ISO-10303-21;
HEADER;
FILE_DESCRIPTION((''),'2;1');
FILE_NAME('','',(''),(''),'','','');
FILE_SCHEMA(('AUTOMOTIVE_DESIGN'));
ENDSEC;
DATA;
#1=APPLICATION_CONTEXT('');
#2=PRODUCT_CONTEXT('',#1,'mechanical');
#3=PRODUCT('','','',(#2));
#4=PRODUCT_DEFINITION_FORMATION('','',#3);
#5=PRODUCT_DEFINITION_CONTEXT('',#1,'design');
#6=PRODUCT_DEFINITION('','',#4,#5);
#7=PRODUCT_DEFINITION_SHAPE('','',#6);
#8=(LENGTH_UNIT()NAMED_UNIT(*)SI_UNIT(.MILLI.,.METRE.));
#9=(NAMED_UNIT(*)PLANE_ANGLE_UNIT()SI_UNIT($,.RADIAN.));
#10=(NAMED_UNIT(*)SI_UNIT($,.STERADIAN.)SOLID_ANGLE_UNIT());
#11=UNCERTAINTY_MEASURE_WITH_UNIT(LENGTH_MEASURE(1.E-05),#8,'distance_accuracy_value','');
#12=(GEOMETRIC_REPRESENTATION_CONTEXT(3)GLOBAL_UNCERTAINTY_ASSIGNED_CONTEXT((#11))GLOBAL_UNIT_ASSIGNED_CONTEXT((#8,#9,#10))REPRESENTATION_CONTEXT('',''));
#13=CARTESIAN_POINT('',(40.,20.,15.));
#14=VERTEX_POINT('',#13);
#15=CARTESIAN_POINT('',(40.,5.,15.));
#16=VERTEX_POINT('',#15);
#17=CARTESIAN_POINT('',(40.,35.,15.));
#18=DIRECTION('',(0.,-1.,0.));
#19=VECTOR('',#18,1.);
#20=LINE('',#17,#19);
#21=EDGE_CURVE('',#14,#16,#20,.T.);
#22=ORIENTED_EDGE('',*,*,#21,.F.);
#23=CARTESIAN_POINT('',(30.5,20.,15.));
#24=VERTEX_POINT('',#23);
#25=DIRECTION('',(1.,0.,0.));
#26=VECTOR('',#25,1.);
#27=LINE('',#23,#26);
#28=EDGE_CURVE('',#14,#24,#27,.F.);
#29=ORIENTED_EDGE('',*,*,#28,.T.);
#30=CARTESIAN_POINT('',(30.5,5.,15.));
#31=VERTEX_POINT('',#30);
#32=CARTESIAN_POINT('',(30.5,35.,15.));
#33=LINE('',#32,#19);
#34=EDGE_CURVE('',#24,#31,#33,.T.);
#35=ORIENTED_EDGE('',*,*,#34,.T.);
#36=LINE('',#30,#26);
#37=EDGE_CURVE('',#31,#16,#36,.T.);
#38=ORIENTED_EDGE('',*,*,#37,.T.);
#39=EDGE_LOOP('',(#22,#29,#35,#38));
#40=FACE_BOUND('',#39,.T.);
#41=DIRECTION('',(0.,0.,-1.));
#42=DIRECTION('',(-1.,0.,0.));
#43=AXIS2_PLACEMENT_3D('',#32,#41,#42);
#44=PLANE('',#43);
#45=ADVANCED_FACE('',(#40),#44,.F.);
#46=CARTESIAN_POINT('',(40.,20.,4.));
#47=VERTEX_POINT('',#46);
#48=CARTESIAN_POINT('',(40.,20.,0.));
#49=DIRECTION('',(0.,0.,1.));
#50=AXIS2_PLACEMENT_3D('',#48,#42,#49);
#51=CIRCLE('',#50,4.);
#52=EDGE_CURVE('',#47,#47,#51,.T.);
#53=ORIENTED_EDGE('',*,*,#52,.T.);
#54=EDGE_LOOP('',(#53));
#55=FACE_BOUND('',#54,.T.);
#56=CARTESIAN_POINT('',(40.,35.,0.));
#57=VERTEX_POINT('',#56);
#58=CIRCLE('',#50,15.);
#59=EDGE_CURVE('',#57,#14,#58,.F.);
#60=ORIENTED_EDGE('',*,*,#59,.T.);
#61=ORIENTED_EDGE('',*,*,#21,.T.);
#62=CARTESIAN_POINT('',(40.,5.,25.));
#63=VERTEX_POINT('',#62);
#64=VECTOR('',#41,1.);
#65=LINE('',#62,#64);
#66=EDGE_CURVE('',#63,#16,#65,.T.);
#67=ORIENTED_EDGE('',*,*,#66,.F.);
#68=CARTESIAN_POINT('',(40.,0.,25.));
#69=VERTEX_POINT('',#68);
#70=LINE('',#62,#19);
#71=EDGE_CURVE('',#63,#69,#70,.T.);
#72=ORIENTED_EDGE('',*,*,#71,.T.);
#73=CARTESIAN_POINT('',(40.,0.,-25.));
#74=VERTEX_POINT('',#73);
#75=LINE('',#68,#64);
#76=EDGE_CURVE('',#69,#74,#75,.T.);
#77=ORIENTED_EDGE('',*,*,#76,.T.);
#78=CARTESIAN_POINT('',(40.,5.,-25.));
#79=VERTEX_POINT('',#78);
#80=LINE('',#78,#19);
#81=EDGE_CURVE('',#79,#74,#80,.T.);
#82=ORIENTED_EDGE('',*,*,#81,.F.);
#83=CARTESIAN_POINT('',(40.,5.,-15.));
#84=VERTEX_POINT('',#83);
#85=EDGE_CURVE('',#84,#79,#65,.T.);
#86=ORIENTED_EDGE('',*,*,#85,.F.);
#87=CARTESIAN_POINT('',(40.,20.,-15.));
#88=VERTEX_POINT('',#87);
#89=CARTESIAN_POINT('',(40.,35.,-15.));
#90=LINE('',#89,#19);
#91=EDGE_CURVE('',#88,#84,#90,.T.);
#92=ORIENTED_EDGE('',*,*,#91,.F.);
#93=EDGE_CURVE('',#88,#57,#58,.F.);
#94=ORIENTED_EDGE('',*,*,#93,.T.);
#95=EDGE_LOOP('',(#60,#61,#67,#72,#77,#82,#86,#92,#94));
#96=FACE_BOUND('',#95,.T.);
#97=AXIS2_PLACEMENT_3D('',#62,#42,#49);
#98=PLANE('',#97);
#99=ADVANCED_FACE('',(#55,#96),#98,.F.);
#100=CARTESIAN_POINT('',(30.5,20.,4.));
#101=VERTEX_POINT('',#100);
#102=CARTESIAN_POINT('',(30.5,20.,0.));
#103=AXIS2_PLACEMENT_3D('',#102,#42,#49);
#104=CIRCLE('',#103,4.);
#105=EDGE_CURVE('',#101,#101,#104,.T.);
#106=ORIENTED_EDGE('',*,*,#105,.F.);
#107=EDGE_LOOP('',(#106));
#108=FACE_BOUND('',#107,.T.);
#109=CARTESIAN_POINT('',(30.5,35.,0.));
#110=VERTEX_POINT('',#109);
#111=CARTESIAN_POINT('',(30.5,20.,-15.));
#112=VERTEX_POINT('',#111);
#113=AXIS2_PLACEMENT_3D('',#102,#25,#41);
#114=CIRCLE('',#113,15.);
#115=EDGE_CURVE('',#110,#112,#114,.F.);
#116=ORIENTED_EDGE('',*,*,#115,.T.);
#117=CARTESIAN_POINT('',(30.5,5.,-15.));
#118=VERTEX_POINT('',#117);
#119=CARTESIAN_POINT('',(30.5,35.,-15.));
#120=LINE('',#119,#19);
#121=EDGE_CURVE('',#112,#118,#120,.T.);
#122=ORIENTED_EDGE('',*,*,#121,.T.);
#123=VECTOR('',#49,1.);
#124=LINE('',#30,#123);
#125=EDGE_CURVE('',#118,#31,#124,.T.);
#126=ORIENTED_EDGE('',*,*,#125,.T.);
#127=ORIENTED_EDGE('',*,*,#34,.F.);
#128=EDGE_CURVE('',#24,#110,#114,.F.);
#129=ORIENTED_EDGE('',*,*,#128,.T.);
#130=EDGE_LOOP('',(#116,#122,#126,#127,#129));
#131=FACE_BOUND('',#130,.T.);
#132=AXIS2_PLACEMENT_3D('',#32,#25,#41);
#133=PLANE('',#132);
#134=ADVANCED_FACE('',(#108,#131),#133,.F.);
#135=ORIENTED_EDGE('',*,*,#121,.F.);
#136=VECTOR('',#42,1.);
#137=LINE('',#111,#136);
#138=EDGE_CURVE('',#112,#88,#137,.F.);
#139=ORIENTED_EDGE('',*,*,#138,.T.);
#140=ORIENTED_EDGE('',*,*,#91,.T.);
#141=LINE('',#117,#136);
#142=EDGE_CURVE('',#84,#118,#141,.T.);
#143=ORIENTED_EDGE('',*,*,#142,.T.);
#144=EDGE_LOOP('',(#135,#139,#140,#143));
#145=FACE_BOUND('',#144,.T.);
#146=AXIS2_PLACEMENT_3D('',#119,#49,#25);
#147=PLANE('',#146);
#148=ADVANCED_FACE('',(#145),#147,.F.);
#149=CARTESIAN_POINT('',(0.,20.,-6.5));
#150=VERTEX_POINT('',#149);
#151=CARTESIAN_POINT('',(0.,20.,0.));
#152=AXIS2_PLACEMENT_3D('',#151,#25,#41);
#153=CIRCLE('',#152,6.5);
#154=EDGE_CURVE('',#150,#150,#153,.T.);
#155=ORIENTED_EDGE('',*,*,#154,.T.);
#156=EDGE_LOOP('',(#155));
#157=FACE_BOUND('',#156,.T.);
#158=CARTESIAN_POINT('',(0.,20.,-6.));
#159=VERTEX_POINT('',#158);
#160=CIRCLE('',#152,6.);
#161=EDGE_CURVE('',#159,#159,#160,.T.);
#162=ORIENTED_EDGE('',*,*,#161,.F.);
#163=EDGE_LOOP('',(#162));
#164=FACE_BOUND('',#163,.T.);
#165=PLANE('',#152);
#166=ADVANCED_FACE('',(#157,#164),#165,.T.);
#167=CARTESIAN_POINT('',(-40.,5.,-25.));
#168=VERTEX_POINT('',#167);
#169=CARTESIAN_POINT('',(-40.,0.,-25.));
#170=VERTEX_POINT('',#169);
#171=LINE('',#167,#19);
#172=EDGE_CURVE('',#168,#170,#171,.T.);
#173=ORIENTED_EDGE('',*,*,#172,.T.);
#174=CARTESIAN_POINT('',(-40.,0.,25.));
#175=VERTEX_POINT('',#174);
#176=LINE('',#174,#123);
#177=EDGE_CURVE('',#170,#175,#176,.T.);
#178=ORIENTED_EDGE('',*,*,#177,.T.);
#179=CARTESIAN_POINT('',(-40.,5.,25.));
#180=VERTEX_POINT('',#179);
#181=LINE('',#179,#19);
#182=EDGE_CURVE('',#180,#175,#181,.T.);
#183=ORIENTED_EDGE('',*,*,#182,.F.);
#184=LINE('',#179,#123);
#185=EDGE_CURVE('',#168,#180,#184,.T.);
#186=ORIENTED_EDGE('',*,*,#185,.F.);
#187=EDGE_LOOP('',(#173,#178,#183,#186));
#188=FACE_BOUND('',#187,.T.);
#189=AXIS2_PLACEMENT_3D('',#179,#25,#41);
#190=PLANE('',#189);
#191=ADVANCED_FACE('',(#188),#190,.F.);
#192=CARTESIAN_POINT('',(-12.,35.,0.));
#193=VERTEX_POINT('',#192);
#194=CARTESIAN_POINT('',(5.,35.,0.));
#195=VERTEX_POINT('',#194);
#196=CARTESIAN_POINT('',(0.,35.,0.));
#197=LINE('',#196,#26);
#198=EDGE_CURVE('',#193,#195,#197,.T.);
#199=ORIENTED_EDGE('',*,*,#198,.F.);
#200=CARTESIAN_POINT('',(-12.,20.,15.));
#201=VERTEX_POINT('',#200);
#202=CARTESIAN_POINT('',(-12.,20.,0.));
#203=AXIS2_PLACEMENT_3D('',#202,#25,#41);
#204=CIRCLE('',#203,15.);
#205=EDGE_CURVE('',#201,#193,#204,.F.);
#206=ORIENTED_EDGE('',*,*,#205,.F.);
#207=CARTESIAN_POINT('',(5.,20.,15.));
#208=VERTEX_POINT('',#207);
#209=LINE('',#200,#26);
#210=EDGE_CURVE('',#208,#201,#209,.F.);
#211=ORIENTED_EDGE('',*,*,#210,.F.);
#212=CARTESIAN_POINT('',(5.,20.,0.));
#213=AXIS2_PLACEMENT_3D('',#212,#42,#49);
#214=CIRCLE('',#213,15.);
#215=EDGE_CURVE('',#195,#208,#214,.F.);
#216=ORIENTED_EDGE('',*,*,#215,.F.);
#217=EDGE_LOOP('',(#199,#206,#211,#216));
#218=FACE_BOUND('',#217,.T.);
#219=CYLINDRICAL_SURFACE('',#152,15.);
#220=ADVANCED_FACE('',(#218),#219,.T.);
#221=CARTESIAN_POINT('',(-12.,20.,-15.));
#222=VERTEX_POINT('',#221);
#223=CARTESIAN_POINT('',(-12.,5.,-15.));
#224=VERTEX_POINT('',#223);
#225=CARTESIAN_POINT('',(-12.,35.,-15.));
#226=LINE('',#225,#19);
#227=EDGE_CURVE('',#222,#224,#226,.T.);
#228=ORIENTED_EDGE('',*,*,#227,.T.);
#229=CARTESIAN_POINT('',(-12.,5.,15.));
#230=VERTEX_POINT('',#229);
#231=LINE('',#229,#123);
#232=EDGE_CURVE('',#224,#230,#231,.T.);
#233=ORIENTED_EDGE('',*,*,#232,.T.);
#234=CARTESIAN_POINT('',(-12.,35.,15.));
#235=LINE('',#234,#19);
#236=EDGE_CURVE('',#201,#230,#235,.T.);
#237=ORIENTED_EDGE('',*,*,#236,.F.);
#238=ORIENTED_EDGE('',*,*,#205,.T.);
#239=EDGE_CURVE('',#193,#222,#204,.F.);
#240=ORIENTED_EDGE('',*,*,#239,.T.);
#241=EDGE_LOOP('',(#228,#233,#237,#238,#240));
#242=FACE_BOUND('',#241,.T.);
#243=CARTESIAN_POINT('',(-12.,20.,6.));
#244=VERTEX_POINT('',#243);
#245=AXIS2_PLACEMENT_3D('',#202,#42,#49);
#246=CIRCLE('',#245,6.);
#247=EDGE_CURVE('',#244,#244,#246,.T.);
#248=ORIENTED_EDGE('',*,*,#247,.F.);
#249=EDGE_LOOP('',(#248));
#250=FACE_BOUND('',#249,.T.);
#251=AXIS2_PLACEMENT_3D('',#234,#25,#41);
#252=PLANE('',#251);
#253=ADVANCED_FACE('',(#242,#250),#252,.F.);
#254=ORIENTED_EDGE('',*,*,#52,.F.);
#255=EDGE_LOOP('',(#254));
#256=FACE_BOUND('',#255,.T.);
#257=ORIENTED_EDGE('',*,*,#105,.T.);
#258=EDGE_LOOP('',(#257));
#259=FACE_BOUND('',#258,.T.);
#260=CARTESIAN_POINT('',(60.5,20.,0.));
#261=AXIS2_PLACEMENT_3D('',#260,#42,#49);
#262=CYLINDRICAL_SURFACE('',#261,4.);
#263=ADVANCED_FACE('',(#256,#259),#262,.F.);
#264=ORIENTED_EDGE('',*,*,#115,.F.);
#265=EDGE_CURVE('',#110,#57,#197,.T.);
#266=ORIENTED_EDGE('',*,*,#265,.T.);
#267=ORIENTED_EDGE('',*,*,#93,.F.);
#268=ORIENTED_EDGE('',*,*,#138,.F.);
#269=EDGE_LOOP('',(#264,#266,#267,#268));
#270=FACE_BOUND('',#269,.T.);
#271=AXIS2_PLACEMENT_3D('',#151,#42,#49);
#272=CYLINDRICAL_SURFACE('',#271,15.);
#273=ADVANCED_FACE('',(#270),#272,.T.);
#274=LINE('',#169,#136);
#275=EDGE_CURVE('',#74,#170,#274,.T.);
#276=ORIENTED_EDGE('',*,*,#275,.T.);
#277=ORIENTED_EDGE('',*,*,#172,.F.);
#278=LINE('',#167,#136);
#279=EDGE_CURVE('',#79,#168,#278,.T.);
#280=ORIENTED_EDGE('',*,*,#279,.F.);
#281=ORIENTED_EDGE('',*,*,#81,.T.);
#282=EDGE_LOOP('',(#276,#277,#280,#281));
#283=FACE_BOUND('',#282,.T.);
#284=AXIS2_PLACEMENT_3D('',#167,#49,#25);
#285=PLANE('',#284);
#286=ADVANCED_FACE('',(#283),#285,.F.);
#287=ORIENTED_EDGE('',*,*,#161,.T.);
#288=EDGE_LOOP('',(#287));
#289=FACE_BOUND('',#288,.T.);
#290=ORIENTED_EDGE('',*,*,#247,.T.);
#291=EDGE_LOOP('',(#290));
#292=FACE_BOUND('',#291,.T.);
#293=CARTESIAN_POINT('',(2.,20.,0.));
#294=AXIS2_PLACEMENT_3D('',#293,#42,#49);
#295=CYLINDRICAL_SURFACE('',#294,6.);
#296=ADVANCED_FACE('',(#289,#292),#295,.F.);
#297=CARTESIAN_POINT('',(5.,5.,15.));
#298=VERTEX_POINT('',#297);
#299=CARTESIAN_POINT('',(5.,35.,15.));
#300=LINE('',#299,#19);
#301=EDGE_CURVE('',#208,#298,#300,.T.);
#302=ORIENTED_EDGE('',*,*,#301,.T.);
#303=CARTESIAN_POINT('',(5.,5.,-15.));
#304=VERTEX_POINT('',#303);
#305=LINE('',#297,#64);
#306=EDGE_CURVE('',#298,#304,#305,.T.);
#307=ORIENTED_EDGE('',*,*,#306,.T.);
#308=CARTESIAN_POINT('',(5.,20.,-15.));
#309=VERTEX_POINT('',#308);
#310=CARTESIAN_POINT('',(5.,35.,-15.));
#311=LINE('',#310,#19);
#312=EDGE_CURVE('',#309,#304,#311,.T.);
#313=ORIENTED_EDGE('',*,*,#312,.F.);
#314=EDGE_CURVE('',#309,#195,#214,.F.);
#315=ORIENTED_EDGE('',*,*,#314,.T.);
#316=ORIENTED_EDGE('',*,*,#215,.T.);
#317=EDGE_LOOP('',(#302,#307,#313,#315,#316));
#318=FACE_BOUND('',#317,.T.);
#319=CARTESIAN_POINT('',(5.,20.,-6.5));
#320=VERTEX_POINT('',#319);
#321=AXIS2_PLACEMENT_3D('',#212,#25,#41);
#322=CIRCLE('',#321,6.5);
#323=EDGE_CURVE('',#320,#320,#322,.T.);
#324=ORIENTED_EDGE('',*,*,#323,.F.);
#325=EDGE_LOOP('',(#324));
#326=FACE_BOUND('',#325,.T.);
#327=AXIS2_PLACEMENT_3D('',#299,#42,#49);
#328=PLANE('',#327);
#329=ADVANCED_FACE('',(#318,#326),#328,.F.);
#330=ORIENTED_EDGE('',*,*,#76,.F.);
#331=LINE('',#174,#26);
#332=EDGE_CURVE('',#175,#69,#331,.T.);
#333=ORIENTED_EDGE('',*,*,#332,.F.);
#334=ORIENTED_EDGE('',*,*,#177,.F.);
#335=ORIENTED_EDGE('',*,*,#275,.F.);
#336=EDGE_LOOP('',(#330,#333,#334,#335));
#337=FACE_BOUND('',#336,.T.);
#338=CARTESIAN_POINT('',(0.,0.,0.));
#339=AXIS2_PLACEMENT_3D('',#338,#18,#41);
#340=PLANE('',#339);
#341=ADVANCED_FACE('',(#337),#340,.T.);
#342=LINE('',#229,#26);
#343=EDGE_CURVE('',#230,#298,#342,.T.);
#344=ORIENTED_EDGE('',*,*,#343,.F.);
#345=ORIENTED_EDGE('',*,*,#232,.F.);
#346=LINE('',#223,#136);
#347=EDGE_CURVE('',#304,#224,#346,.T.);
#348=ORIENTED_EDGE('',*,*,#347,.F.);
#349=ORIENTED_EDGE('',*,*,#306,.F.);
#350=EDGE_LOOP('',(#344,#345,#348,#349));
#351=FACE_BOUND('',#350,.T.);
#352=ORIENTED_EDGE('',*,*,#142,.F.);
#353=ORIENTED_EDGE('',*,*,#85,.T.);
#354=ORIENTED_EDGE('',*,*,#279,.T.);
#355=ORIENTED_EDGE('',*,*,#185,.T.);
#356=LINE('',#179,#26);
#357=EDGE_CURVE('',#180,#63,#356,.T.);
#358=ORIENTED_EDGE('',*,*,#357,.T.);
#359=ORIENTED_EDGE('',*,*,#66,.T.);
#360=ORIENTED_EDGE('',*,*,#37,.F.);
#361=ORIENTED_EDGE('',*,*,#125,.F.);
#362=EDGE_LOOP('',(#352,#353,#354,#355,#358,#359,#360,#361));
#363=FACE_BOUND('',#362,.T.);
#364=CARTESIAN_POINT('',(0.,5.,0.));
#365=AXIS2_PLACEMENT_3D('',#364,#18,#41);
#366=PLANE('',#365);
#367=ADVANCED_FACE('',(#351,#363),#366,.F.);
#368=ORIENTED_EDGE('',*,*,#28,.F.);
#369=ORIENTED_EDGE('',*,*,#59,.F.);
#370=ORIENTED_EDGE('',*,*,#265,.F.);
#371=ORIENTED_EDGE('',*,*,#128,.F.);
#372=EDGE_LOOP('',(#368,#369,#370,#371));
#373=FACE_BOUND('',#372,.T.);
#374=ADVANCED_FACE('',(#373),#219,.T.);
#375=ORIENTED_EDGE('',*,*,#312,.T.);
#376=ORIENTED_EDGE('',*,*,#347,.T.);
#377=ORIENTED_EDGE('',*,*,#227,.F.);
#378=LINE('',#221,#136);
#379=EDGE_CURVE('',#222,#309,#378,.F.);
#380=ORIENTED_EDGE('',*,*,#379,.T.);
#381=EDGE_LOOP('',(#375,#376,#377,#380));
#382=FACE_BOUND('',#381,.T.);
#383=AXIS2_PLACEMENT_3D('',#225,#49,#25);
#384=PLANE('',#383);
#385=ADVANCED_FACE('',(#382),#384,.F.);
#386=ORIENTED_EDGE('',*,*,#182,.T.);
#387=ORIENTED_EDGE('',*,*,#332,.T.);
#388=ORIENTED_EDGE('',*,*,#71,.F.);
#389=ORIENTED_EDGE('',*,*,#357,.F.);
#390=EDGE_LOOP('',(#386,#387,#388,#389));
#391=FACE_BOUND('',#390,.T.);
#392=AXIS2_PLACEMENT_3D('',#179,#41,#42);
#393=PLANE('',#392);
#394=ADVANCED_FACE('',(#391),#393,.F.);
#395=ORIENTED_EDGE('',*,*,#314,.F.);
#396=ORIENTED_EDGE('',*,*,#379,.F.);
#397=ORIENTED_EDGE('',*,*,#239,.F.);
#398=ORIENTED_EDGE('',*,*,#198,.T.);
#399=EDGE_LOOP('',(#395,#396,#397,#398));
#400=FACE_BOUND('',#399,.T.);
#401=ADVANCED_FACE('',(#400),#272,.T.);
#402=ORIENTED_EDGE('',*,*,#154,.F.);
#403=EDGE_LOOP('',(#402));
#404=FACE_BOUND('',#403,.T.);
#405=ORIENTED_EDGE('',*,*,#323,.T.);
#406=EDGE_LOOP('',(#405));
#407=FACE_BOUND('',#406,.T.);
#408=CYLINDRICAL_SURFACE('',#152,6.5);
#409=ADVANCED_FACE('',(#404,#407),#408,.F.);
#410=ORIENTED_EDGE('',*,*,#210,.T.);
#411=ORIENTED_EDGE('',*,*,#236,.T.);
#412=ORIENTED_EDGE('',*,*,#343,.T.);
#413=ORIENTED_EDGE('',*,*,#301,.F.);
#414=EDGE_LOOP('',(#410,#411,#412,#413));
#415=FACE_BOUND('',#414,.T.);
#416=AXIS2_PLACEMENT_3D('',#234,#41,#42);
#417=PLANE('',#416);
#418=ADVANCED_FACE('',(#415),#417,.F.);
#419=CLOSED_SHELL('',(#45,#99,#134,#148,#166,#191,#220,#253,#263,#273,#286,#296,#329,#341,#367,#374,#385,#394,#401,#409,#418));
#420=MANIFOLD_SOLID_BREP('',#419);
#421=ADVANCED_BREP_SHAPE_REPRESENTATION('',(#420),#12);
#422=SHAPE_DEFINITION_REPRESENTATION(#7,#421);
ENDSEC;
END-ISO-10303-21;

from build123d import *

# Parameters (mm, degrees)
SKETCH1_W           = 80
SKETCH1_H           = 50
BOSS_EXTRUDE1_DEPTH = 5
SKETCH2_W           = 17
SKETCH2_H           = 30
SKETCH2_W_2         = 9.5
BOSS_EXTRUDE2_DEPTH = 30
FILLET1_R           = 15
SKETCH3_R           = 4
CUT_EXTRUDE1_DEPTH  = 30
SKETCH4_R           = 6.5
CUT_EXTRUDE2_DEPTH  = 5
SKETCH5_R           = 6
CUT_EXTRUDE3_DEPTH  = 14


with BuildPart() as part:
    # Sketch1 → Boss-Extrude1 (new body)
    with BuildSketch(Plane(origin=(0, 0, 0), x_dir=(1, 0, 0), z_dir=(0, 1, 0))):
        Rectangle(SKETCH1_W, SKETCH1_H)
    extrude(amount=BOSS_EXTRUDE1_DEPTH)

    # Sketch2 → Boss-Extrude2 (add)
    with BuildSketch(Plane(origin=(0, 5, 0), x_dir=(1, 0, 0), z_dir=(0, 1, 0))):
        with Locations((-3.5, 0)):
            Rectangle(SKETCH2_W, SKETCH2_H)
        with Locations((35.25, 0)):
            Rectangle(SKETCH2_W_2, SKETCH2_H)
    extrude(amount=BOSS_EXTRUDE2_DEPTH)

    # Fillet1
    fillet1_edges = [part.edges().sort_by_distance(p)[0] for p in [
        (-3.5, 35, -15),
        (-3.5, 35, 15),
        (35.25, 35, -15),
        (35.25, 35, 15),
    ]]
    fillet(fillet1_edges, radius=FILLET1_R - 0.0001)  # a hair under: the kernel refuses the full size

    # Sketch3 → Cut-Extrude1 (cut)
    with BuildSketch(Plane.ZY.offset(-30.5)):
        with Locations((0, 20)):
            Circle(SKETCH3_R)
    extrude(amount=-CUT_EXTRUDE1_DEPTH, mode=Mode.SUBTRACT)

    # Sketch4 → Cut-Extrude2 (cut)
    with BuildSketch(Plane(origin=(5, 0, 0), x_dir=(0, 0, -1), z_dir=(1, 0, 0))):
        with Locations((0, 20)):
            Circle(SKETCH4_R)
    extrude(amount=-CUT_EXTRUDE2_DEPTH, mode=Mode.SUBTRACT)

    # Sketch5 → Cut-Extrude3 (cut)
    with BuildSketch(Plane.ZY.offset(12)):
        with Locations((0, 20)):
            Circle(SKETCH5_R)
    extrude(amount=-CUT_EXTRUDE3_DEPTH, mode=Mode.SUBTRACT)


solid = part.part
